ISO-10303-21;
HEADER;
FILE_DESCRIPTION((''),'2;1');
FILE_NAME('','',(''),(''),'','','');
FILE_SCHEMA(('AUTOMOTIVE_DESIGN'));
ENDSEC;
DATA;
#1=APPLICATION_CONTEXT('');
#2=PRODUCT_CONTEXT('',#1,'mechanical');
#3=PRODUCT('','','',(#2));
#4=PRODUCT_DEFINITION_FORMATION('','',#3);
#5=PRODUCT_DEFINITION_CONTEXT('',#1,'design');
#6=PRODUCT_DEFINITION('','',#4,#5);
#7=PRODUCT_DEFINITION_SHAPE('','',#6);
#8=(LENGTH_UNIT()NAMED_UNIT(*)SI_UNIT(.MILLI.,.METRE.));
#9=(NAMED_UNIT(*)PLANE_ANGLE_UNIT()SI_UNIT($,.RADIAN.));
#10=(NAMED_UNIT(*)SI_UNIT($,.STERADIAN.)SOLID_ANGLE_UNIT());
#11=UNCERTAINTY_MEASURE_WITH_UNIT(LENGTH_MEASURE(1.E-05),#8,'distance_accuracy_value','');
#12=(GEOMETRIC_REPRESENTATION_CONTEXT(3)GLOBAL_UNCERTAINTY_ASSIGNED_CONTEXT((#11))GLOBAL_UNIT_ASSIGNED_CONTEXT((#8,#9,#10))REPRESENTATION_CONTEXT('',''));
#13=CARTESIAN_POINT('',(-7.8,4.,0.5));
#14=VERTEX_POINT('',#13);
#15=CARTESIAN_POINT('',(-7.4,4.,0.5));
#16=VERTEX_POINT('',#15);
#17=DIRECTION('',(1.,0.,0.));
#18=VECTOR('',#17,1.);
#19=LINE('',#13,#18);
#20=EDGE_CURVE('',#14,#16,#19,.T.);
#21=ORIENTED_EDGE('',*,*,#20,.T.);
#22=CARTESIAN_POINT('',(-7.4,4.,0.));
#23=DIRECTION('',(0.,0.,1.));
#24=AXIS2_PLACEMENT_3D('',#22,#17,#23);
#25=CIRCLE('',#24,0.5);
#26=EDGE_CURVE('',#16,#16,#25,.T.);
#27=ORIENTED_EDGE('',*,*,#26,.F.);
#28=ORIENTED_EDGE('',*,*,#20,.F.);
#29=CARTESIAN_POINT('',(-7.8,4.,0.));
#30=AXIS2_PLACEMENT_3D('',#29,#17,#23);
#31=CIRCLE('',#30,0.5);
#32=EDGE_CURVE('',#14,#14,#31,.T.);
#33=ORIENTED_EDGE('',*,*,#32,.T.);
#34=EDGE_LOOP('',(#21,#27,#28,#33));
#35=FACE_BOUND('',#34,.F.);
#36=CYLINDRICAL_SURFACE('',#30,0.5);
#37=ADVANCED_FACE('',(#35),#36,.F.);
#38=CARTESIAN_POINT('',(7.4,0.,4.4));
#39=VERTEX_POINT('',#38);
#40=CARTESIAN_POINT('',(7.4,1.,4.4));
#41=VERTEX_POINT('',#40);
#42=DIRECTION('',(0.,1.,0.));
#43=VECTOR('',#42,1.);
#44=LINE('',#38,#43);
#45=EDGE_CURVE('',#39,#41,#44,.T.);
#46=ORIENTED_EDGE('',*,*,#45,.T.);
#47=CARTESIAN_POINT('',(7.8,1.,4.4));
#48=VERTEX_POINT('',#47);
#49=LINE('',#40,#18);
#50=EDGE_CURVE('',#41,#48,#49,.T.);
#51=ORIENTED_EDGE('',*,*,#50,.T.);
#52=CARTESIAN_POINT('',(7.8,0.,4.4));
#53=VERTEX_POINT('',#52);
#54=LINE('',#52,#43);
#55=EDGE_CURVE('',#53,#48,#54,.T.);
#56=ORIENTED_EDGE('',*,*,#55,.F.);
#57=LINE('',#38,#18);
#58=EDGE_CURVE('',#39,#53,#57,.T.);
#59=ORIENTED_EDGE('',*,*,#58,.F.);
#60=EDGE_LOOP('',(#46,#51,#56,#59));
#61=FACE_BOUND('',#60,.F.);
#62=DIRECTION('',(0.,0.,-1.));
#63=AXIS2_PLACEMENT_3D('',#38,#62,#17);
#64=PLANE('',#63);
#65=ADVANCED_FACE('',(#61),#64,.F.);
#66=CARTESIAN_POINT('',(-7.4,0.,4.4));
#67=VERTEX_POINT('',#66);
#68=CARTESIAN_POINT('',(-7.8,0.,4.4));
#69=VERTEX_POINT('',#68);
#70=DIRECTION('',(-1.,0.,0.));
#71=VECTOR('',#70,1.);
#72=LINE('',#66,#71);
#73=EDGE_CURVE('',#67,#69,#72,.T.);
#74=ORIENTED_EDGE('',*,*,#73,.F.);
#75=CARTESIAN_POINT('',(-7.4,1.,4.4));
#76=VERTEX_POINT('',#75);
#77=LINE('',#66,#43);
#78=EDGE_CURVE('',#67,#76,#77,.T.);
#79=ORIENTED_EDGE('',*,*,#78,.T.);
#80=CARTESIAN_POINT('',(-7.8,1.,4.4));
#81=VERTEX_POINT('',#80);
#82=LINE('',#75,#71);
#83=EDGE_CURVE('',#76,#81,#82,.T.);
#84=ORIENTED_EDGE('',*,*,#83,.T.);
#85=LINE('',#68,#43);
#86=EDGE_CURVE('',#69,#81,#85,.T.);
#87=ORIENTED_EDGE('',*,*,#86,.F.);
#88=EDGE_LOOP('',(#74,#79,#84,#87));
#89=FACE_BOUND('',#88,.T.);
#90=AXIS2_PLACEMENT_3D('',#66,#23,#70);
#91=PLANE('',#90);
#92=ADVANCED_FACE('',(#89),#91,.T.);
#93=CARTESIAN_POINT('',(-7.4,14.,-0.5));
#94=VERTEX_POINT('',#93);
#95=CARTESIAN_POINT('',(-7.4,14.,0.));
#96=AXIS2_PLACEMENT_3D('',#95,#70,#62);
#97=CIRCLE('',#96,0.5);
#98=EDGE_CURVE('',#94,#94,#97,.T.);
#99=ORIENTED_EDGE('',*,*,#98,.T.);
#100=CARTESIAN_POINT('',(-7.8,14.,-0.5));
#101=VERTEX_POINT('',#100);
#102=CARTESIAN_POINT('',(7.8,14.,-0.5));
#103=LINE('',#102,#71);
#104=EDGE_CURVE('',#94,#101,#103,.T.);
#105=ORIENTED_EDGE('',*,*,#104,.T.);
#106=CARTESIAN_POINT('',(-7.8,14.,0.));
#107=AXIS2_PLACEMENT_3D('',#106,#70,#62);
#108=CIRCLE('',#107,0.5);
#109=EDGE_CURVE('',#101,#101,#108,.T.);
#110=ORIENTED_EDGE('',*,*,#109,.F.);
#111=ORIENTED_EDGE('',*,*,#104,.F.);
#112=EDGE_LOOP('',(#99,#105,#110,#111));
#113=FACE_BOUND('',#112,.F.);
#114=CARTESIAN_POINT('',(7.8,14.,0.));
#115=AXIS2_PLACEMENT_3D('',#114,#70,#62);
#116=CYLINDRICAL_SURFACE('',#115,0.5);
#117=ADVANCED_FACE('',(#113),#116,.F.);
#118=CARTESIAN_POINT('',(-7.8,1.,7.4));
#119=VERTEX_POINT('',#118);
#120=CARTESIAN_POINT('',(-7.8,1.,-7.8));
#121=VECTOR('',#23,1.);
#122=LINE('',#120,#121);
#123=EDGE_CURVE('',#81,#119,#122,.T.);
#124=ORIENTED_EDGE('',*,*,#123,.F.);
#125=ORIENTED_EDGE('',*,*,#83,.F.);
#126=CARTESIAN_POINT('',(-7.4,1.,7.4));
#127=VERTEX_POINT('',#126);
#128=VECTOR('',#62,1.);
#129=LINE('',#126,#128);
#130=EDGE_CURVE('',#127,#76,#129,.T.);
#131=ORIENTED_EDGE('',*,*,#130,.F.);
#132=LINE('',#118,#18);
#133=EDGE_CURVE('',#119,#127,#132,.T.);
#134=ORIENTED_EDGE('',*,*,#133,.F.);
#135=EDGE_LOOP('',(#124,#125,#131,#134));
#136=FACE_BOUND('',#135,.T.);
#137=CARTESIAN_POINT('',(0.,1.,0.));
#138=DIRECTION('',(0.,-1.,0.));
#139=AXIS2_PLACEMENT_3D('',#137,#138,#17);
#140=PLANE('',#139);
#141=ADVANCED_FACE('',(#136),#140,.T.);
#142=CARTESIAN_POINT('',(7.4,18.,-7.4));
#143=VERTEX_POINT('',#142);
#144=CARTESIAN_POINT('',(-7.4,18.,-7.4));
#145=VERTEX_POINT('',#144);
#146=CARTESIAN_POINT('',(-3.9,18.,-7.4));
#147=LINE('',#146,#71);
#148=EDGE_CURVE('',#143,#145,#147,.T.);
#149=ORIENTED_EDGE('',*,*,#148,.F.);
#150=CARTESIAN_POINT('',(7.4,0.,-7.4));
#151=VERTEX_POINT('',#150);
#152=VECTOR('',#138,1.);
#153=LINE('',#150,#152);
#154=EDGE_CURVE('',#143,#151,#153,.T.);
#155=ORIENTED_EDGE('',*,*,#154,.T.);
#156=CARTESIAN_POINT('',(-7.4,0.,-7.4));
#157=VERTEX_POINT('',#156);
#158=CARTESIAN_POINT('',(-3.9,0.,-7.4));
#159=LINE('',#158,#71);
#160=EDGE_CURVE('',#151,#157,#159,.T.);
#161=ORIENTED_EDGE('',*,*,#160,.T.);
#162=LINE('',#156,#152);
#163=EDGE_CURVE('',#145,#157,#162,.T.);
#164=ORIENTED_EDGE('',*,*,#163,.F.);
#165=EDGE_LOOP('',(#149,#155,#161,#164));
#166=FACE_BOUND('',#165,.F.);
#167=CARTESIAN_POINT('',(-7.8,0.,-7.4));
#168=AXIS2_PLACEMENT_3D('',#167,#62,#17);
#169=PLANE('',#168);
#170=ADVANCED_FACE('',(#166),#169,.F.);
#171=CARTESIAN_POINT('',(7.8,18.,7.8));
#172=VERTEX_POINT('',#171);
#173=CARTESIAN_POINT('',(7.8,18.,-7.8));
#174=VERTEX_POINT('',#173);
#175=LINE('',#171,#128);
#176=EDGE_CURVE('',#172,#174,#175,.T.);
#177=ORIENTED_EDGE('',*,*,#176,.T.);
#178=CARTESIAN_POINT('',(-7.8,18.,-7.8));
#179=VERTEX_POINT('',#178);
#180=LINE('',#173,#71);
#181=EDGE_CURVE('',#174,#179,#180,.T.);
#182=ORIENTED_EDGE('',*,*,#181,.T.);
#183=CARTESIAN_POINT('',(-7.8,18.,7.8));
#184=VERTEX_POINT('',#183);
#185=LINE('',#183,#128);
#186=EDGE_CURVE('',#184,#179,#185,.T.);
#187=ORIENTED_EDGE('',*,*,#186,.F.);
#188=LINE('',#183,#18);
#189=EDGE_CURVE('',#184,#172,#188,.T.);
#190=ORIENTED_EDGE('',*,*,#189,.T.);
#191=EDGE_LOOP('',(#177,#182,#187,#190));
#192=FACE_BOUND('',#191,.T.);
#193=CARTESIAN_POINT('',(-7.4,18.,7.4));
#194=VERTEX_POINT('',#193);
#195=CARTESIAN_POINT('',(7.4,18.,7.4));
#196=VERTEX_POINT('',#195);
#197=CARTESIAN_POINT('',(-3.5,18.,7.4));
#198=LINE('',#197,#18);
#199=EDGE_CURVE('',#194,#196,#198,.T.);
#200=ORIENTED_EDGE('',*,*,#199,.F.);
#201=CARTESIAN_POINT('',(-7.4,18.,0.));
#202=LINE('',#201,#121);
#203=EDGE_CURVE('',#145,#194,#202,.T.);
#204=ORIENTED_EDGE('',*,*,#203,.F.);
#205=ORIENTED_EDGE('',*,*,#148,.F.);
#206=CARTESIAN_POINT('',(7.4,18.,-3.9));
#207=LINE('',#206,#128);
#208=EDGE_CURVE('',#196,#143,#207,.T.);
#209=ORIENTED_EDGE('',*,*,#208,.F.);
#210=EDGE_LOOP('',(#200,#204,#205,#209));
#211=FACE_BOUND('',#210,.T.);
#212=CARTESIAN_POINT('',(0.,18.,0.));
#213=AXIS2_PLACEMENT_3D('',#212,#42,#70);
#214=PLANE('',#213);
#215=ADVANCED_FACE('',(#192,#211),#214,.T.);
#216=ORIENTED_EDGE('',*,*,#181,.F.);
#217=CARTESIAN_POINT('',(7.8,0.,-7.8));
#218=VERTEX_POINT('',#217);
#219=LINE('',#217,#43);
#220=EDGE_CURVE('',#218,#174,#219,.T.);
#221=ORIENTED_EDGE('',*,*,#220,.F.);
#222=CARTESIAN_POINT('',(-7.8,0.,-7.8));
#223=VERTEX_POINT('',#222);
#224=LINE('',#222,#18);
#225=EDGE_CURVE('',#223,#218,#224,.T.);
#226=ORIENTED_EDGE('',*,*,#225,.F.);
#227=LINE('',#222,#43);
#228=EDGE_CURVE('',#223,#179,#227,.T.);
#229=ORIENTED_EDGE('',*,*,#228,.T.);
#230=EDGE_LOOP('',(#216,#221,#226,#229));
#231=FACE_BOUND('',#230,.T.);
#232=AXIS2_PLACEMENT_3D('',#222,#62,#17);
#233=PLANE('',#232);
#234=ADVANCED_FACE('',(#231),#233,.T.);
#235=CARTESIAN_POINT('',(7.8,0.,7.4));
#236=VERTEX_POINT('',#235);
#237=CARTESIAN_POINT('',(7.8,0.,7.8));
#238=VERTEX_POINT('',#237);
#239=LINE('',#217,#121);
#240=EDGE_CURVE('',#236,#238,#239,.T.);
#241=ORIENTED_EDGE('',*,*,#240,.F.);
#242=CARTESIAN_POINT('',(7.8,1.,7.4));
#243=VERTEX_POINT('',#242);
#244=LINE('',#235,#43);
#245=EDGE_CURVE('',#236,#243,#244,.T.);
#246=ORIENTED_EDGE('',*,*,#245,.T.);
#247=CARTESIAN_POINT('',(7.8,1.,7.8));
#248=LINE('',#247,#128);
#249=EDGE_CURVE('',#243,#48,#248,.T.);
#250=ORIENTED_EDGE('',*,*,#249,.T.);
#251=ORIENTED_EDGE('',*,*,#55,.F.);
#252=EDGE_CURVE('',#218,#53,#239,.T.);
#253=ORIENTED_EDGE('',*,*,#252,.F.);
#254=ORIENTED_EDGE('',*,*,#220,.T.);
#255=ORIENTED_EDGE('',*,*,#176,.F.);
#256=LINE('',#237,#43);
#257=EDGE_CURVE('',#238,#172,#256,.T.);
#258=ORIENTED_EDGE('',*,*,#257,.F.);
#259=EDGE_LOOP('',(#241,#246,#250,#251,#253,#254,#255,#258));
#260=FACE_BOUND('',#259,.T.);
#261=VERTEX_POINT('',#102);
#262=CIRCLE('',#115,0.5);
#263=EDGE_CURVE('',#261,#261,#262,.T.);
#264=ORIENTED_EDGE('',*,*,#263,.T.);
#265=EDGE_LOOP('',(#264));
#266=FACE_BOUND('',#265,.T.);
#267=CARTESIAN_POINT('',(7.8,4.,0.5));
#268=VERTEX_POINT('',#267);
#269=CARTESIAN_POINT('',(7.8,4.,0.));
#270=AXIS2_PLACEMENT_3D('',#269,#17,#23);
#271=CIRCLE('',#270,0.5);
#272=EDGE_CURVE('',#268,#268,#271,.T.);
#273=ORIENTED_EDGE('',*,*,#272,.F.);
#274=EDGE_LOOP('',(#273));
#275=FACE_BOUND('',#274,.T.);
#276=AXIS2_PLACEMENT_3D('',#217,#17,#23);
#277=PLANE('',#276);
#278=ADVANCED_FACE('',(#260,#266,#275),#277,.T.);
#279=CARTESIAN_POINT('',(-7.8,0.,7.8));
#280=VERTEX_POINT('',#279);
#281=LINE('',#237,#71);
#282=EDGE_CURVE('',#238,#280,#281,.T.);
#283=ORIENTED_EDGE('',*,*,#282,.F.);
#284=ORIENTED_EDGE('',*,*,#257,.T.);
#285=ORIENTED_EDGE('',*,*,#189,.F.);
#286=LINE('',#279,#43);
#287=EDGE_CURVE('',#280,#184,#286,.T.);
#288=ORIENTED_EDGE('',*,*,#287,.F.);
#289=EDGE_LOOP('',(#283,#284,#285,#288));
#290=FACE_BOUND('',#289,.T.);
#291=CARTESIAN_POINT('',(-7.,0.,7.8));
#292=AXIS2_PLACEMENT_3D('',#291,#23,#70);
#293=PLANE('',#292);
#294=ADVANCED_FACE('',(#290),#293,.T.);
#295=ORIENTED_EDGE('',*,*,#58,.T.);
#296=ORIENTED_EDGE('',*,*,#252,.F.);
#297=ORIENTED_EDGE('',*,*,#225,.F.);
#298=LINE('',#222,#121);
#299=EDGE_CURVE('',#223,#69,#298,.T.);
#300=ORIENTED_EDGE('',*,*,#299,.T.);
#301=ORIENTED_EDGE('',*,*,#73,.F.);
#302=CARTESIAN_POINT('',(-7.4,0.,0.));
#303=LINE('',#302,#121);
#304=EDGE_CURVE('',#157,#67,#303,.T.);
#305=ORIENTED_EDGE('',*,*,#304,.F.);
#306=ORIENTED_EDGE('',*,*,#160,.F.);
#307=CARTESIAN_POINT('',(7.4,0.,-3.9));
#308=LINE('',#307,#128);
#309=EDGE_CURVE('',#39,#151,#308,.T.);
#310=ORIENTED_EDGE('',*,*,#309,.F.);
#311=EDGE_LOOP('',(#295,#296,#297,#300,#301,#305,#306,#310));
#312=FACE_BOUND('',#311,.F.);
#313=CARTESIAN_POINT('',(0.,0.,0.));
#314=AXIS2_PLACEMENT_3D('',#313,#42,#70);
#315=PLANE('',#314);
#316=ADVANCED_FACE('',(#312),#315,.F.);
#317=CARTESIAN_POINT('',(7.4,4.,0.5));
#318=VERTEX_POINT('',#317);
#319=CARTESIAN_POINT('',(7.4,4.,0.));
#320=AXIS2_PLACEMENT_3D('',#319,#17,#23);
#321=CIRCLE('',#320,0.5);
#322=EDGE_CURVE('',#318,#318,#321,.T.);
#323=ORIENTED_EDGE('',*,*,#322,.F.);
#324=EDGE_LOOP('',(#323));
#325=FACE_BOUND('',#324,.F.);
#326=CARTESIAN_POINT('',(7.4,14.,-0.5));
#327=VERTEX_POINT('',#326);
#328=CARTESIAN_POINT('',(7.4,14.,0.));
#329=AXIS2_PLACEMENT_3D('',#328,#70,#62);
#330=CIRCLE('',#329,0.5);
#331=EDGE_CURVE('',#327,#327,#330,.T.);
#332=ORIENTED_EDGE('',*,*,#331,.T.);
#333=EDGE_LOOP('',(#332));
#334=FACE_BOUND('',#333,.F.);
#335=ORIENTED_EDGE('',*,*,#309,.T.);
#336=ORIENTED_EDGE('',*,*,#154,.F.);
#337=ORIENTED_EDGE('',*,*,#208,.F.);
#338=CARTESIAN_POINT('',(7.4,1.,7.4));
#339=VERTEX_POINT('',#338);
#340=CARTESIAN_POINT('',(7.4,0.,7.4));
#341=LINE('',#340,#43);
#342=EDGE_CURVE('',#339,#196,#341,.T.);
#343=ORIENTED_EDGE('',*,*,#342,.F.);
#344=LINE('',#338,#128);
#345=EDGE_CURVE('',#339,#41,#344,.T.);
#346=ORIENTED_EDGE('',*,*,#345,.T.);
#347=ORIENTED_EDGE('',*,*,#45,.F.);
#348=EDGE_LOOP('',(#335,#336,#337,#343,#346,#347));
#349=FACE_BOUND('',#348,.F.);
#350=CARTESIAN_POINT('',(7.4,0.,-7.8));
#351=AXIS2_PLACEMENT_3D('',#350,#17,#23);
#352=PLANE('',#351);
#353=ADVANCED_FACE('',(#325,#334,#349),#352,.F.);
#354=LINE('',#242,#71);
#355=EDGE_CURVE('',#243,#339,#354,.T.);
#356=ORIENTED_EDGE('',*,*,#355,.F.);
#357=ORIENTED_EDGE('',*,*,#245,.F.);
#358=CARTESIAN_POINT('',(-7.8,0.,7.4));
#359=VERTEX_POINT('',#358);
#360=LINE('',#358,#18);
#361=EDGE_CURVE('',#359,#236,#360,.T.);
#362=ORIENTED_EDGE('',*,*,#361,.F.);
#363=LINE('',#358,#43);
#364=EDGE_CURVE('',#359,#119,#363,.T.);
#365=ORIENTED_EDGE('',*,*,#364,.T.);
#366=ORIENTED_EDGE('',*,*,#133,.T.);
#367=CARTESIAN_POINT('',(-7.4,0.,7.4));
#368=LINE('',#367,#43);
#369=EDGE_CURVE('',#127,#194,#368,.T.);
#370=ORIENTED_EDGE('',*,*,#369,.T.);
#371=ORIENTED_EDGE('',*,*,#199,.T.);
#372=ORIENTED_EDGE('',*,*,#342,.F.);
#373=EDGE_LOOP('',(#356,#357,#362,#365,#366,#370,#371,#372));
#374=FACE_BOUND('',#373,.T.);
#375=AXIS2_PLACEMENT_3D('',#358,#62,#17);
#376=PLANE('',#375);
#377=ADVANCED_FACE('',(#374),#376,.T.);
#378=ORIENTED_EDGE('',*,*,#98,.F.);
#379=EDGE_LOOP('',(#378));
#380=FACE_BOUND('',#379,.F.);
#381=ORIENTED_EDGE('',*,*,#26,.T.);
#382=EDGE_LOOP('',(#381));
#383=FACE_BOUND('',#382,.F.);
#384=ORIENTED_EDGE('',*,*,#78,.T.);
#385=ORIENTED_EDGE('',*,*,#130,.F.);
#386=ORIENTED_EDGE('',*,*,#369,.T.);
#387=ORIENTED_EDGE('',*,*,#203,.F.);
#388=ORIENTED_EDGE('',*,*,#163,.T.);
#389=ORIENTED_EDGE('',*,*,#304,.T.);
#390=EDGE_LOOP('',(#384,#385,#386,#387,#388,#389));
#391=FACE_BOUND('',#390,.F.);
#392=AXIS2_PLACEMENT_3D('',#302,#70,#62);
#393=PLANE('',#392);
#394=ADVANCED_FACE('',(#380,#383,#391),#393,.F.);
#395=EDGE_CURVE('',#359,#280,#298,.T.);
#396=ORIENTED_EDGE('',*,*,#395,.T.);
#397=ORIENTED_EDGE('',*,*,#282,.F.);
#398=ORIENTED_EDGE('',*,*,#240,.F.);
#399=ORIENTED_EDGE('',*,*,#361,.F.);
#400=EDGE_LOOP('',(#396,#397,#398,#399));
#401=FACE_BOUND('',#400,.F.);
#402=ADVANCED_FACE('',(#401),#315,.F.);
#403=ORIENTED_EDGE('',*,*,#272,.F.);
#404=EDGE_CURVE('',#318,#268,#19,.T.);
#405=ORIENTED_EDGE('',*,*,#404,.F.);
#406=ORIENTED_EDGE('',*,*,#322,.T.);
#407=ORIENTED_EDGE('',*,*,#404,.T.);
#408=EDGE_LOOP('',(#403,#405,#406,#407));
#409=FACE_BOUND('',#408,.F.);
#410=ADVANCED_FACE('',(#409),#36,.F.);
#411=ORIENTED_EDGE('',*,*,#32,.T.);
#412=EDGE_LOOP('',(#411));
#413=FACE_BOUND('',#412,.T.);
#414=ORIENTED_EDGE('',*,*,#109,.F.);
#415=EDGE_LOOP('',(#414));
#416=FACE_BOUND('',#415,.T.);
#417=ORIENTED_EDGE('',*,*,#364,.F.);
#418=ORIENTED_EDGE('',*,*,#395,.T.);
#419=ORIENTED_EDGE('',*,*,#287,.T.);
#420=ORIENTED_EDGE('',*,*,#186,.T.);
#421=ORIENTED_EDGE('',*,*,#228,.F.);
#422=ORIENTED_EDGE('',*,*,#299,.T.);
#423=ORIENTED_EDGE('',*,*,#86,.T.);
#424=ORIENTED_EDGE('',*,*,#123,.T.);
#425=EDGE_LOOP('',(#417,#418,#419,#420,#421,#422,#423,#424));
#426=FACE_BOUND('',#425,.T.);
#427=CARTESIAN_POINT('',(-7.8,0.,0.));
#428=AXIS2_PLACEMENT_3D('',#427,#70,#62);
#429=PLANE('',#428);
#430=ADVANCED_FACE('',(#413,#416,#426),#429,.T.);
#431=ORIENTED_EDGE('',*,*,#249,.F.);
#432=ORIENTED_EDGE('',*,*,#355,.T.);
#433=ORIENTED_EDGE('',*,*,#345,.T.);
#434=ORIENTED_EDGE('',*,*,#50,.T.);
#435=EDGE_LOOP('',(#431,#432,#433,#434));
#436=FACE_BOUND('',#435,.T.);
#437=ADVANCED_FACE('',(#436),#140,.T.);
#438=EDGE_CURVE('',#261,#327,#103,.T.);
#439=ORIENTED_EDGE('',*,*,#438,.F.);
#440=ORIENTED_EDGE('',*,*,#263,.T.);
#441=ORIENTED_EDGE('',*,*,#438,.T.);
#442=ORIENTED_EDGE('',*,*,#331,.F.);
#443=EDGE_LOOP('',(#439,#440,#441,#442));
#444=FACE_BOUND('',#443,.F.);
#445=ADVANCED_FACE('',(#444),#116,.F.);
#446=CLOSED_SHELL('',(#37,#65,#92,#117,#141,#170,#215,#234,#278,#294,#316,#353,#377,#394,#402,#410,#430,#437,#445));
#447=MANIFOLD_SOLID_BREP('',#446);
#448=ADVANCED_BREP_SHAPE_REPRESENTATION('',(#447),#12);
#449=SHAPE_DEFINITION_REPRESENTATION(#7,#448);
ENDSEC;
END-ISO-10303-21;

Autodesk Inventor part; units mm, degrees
ref_plane "YZ Plane" through (0, 0, 0) normal (1, 0, 0) x (0, 1, 0)
ref_plane "XZ Plane" through (0, 0, 0) normal (0, 1, 0) x (-1, 0, 0)
ref_plane "XY Plane" through (0, 0, 0) normal (0, 0, 1) x (1, 0, 0)
sketch "Sketch1" plane through (0, 0, 0) normal (0, 1, 0) x (-1, 0, 0)
  line L0 (7.8, 0) -> (7.8, -7.8)
  line L1 (7.8, -7.8) -> (-7.8, -7.8)
  line L2 (-7.8, -7.8) -> (-7.8, 7.8)
  line L3 (-7.8, 7.8) -> (7.8, 7.8)
  line L4 (7.8, 7.8) -> (7.8, 0)
  line L5 (7.8, 7.8) -> (7, 7.8)
  line L6 (-7.8, 7.8) -> (-7.8, 7.4)
  line L7 (-7.8, -7.8) -> (-7.4, -7.8)
  line L8 (7.8, -7.8) -> (7.8, -7.4)
  line L9 (0, 0) -> (7.4, 0)
  line L10 (7.4, 0) -> (7.4, -7.4)
  line L11 (7.4, -7.4) -> (-7.4, -7.4)
  line L12 (-7.4, -7.4) -> (-7.4, 7.4)
  line L13 (-7.4, 7.4) -> (7.4, 7.4)
  line L14 (7.4, 7.4) -> (7.4, 0)
  line L15 (2.7947, -7.8) -> (2.7947, -7.4)
  dimension "d1" = 7.8
  dimension "d2" = 15.6
  dimension "d3" = 15.6
  dimension "d4" = 15.6
  dimension "d5" = 7.8
  dimension "d62" = 7.4
  dimension "d63" = 7.4
  dimension "d64" = 14.8
  dimension "d65" = 14.8
  dimension "d66" = 14.8
  dimension "d68" = 0.4
extrude "Extrusion1" add sketch "Sketch1" along normal blind 18 contours L0 L1 L2 L3 L4 | L10 L11 L12 L13 L14
shell "Shell2" thickness 0.4 removed faces 2 at (2.6, 18, 0) at (2.6, 0, 0)
sketch "Sketch4" plane through (-7.8, 0, -7.8) normal (-1, 0, 0) x (0, 0, 1)
  line L0 (7.8, 0) -> (7.8, 4)
  circle A0 centre (7.8, 4) radius 0.5
  dimension "d17" = 4
  dimension "d18" = 1
hole "Hole1" at (-7.8, 4, 0) direction (1, 0, 0) diameter 1 depth 20
sketch "Sketch8" plane through (7.8, 0, 7.8) normal (1, 0, 0) x (0, 0, -1)
  line L0 (15.2, 18) -> (0.4, 18) projected
  line L1 (7.8, 18) -> (7.8, 14)
  circle A0 centre (7.8, 14) radius 0.5
  point P0 (7.8, 0)
  dimension "d50" = 4
  dimension "d51" = 1
hole "Hole4" at (7.8, 14, 0) direction (-1, 0, 0) diameter 1 depth 20
sketch "Sketch9" plane through (0, 0, 0) normal (0, -1, 0) x (1, 0, 0)
  line L0 (7.4, 7.4) -> (-7.4, 7.4) projected
  line L1 (-7.4, 7.4) -> (-7.4, 4.4)
  line L2 (-7.4, -7.4) -> (-7.4, 7.4) projected
  line L3 (-7.4, 4.4) -> (-7.8, 4.4)
  line L4 (-7.8, -7.8) -> (-7.8, 7.8) projected
  line L5 (-7.8, 4.4) -> (-7.8, 7.4)
  line L6 (-7.8, 7.4) -> (-7.4, 7.4)
  line L7 (7.4, 7.4) -> (7.4, 4.4)
  line L8 (7.4, 7.4) -> (7.4, -7.4) projected
  line L9 (7.4, 4.4) -> (7.8, 4.4)
  line L10 (7.8, 7.8) -> (7.8, -7.8) projected
  line L11 (7.8, 4.4) -> (7.8, 7.4)
  line L12 (7.8, 7.4) -> (7.4, 7.4)
  point P0 (0, 0)
  dimension "d69" = 3
  dimension "d70" = 3
extrude "Extrusion2" cut sketch "Sketch9" against normal blind 1
properties part number "Part4_cover" material "ABS Plastic"
